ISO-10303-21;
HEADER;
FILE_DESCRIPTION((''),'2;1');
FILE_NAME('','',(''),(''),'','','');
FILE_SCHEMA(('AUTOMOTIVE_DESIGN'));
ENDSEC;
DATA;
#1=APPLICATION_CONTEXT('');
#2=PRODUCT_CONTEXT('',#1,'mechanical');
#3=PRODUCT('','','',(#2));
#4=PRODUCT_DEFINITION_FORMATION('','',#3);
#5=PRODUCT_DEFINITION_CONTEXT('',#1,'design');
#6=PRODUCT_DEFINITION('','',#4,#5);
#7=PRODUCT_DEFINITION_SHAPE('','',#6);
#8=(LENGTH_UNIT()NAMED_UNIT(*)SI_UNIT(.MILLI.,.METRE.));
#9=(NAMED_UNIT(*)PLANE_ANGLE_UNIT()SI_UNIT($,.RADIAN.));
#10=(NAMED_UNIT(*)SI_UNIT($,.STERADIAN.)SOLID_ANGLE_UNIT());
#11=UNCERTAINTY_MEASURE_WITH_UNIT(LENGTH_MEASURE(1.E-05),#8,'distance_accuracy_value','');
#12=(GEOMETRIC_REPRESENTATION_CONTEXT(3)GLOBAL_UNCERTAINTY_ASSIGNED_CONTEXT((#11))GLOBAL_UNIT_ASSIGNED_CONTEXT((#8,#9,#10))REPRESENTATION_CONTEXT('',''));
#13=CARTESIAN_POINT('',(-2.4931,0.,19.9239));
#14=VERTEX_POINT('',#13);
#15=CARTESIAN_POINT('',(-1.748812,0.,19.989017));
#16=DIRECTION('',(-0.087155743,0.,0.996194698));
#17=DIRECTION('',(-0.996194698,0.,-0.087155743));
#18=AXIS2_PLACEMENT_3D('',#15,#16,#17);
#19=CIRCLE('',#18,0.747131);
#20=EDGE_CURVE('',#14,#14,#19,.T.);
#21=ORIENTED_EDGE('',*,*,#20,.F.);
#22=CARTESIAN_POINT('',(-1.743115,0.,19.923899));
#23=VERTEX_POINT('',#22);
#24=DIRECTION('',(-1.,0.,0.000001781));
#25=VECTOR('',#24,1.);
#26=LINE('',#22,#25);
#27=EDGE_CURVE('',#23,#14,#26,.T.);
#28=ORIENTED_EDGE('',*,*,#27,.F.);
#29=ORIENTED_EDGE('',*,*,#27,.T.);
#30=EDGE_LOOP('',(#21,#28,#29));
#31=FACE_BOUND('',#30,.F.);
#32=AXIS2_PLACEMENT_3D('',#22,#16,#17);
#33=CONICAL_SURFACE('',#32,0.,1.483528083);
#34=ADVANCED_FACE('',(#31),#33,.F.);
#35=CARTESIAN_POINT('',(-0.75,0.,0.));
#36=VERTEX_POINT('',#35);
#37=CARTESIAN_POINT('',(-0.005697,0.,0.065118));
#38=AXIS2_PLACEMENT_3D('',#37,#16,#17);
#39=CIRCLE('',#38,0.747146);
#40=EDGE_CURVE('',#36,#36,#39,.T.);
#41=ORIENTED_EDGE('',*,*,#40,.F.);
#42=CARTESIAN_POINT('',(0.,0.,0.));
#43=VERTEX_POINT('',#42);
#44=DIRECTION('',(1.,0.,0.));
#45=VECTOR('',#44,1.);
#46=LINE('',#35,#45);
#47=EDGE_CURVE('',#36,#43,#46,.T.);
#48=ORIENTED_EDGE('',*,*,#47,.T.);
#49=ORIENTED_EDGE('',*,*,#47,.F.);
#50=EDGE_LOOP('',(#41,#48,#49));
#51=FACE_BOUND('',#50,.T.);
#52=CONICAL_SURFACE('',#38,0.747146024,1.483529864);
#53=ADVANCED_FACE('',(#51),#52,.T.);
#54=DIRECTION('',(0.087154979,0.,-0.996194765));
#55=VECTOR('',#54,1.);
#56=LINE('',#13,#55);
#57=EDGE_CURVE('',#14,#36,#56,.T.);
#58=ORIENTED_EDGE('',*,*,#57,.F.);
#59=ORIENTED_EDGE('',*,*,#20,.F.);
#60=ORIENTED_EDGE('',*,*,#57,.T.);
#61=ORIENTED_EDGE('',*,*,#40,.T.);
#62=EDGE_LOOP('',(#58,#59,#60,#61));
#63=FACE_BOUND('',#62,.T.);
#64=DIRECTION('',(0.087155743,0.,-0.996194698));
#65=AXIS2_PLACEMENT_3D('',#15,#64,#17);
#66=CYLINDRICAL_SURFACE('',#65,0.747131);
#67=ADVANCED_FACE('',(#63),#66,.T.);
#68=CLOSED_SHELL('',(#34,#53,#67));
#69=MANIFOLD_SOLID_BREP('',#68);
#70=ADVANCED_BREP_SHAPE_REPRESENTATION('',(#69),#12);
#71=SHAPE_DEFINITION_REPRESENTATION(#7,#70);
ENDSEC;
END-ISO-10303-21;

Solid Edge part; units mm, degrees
sketch "Sketch1" plane through (0, 0, 0) normal (0, -1, 0) x (1, 0, 0)
  line L0 (0, 0) -> (-1.7431, 19.9239)
  line L1 (-1.7431, 19.9239) -> (-2.4931, 19.9239)
  line L2 (-2.4931, 19.9239) -> (-0.75, 0)
  line L3 (-0.75, 0) -> (0, 0)
revolve "RevolvedProtrusion1" add sketch "Sketch1" angle 360 about axis through (0, 0, 0) along (-0.0871557, 0, 0.9961947)
properties material "Stainless Steel, 420"
